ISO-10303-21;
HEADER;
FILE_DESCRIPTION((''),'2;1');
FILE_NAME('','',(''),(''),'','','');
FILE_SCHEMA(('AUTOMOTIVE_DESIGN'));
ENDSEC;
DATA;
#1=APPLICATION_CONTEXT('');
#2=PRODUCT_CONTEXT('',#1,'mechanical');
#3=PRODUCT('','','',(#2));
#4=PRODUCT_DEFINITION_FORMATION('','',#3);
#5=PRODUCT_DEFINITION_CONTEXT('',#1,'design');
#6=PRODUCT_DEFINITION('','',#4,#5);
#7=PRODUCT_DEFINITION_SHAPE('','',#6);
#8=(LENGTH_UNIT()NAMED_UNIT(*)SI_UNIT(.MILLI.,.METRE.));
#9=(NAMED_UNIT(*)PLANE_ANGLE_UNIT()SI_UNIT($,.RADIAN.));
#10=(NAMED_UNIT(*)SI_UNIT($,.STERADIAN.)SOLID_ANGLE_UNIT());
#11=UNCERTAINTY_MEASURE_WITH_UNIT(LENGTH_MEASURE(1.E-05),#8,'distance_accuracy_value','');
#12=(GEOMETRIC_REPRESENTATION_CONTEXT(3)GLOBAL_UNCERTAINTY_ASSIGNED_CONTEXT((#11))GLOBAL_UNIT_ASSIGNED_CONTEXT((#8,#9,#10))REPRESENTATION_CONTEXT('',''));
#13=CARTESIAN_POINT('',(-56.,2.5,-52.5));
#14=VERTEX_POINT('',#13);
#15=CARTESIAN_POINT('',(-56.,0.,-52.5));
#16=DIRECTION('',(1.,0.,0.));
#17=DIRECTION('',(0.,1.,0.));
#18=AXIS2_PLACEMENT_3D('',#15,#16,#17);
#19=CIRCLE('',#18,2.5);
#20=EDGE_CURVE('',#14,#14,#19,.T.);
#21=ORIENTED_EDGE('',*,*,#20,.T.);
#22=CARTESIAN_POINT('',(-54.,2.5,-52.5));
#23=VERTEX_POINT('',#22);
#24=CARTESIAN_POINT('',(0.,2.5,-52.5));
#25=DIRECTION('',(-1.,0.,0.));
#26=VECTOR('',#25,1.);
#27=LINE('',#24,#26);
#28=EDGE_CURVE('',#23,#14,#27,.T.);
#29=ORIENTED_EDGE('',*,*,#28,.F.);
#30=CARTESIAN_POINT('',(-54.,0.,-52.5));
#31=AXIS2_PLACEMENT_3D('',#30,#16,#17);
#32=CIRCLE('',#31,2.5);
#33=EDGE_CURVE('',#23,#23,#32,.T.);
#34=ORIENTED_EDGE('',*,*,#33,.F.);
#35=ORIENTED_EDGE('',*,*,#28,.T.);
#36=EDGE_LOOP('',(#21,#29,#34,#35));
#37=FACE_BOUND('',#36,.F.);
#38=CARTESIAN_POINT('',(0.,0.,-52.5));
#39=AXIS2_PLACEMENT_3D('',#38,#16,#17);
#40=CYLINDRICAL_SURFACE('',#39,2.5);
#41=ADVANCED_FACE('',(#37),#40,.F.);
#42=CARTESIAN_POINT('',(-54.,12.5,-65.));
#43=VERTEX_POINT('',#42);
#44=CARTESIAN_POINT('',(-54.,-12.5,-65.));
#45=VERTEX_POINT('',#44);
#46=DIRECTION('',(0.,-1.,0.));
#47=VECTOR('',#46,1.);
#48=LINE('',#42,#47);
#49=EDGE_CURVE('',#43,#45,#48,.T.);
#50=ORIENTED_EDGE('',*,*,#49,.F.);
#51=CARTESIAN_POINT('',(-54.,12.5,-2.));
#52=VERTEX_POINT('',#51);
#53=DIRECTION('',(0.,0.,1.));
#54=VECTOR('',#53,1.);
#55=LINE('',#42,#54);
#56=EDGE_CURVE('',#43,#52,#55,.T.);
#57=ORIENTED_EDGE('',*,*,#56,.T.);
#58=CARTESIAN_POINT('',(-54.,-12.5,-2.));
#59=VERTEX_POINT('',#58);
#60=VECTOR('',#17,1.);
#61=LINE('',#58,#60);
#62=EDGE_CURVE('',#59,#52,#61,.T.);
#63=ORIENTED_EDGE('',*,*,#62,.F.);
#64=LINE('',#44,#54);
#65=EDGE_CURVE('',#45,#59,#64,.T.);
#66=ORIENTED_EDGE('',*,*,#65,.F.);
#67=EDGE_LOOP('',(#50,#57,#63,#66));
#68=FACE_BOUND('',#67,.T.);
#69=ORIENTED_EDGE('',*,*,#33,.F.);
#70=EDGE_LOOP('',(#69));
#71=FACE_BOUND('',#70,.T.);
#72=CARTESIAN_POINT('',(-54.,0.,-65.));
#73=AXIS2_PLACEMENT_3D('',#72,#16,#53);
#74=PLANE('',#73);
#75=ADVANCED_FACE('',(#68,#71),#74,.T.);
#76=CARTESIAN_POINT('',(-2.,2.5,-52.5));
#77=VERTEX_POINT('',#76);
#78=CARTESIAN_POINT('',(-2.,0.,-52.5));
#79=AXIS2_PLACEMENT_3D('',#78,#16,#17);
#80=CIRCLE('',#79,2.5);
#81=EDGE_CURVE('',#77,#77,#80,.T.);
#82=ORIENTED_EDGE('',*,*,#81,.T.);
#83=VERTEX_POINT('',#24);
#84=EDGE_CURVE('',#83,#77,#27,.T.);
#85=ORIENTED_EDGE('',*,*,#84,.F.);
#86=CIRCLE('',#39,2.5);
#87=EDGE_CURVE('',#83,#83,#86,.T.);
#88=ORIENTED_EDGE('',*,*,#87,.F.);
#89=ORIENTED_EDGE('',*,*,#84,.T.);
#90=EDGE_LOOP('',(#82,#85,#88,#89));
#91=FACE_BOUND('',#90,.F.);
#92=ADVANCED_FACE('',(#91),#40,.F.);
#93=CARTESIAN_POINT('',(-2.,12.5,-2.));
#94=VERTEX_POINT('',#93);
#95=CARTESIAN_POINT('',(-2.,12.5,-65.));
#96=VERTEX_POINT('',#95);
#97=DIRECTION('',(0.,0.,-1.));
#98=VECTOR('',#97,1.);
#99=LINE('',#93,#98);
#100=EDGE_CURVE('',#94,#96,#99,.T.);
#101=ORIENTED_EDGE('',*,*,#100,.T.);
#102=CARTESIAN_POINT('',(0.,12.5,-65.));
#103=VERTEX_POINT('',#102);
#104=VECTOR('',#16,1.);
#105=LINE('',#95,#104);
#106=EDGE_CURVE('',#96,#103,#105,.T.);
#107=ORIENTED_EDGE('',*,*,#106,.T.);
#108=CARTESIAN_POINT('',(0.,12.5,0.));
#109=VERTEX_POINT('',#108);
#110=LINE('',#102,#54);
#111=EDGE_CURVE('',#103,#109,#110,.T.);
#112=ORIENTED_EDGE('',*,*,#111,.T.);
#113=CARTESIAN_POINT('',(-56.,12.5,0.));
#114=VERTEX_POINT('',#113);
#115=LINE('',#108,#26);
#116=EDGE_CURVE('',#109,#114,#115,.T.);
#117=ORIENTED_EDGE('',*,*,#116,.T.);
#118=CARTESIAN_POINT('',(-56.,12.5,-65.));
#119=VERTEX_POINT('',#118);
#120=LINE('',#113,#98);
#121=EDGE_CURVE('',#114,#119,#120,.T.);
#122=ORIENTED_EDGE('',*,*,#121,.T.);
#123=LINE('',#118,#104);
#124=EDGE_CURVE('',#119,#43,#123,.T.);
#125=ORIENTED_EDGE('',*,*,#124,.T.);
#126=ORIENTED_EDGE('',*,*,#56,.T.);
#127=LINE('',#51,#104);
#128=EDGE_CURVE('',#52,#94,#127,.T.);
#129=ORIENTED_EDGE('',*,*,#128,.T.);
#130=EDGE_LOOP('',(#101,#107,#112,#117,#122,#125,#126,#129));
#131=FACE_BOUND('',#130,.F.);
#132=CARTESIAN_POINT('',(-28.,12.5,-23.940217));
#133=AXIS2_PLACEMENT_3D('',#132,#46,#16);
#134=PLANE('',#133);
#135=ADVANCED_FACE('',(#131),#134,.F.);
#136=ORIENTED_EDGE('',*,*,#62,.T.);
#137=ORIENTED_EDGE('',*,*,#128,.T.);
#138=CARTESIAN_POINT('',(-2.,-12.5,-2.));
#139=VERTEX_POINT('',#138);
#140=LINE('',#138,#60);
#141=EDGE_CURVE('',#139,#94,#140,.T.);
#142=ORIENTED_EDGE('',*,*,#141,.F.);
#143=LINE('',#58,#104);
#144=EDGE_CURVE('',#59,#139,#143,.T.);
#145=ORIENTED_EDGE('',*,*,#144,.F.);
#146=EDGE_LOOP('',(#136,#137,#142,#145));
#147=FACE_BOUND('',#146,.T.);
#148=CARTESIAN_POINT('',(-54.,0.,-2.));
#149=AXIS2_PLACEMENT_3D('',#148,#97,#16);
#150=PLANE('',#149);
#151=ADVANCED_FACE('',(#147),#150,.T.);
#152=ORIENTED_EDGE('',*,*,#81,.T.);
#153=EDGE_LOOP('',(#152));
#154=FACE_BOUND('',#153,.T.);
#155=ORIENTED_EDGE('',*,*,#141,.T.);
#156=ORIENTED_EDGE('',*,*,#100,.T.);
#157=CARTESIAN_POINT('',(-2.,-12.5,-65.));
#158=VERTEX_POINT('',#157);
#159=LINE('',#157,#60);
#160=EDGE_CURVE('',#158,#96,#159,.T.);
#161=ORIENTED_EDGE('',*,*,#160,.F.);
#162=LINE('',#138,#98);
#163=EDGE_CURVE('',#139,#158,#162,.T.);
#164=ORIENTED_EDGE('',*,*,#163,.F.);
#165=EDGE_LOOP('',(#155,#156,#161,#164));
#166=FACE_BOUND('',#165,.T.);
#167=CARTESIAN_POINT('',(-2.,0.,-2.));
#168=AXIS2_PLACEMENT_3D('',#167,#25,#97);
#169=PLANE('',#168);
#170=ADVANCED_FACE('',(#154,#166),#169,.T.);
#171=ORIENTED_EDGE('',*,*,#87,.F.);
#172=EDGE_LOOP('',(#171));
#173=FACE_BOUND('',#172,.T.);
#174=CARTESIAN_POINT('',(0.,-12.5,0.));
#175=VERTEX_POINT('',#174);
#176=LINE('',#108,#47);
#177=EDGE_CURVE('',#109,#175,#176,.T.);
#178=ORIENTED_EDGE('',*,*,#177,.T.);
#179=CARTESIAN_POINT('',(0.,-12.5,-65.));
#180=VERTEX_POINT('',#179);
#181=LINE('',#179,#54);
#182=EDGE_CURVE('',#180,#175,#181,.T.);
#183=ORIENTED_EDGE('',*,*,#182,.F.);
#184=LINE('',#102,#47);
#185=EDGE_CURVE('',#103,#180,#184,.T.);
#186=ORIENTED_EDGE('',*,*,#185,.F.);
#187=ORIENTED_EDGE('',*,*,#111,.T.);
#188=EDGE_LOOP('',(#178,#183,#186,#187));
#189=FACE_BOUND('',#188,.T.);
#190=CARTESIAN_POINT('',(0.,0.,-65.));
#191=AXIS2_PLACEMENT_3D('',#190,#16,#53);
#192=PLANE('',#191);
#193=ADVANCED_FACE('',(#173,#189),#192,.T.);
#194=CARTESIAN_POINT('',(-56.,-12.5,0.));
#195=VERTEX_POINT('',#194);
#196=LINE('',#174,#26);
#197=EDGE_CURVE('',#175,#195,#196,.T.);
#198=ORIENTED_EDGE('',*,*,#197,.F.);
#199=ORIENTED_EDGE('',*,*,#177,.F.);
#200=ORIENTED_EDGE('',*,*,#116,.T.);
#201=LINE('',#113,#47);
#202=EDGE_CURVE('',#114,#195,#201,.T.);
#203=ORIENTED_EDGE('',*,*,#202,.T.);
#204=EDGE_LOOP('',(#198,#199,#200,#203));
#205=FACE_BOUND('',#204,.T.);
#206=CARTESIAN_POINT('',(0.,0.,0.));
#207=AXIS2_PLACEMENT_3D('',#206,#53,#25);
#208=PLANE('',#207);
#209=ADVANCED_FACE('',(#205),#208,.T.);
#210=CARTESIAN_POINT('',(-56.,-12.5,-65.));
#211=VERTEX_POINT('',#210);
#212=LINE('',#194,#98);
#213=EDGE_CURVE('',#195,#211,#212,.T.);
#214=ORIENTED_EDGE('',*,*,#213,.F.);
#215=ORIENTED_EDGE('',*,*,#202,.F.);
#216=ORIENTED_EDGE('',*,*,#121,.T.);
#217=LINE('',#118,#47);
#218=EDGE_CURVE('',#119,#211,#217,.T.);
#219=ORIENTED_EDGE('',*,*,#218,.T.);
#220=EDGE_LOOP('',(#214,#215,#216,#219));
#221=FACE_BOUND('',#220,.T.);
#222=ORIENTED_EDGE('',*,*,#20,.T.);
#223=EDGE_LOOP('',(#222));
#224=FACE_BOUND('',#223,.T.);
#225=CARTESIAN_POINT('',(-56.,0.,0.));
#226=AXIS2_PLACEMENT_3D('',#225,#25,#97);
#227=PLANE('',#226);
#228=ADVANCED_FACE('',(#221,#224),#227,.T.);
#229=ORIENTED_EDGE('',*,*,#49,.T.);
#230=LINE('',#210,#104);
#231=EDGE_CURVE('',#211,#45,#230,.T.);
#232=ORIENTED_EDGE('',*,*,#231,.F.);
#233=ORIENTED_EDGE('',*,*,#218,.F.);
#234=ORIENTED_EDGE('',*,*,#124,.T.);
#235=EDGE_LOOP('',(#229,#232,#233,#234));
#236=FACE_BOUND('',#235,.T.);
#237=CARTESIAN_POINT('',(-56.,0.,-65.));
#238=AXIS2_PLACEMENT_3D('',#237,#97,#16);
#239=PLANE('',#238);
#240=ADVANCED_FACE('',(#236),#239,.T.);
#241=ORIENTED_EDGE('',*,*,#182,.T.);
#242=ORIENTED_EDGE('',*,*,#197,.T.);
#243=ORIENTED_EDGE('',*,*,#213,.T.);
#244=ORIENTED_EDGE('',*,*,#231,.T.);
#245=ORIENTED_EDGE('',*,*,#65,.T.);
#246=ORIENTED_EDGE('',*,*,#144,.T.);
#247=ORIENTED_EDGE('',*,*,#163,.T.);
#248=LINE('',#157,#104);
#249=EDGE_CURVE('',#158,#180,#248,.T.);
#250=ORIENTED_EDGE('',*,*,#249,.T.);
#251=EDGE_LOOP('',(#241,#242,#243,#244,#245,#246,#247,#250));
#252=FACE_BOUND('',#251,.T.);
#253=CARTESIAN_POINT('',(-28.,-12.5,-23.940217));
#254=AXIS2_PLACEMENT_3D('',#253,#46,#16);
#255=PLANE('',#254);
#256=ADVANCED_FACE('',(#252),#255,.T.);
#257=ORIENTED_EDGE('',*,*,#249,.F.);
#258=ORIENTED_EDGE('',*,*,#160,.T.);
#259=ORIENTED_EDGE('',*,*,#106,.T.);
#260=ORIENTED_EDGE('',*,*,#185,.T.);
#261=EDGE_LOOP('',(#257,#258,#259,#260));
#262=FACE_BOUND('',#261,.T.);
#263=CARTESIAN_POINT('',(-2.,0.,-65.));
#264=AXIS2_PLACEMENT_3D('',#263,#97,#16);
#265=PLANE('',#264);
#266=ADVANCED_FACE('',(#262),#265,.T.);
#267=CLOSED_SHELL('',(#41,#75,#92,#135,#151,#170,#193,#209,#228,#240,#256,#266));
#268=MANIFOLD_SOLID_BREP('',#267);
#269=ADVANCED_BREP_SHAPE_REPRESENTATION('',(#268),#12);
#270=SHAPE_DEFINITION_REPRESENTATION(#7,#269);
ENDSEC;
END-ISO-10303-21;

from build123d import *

# Parameters (mm, degrees)
F1_DEPTH      = 12.5
F2_R          = 2.5
F3_DEPTH      = 56.001
F3_DEPTH_BACK = 126


# Not quite as in the source:
# - an extrude ends at something that could not be found from the text; its depth is read off the source's solid


with BuildPart() as f1:
    # F0 (on Front) → F1 (new body, symmetric)
    with BuildSketch(Plane.XZ):
        Polygon((-2, -65), (0, -65), (0, 0), (-56, 0), (-56, -65), (-54, -65), (-54, -2), (-2, -2), align=None)
    extrude(amount=F1_DEPTH, both=True)

    # F2 (on Right) → F3 (cut, two sides)
    with BuildSketch(Plane.YZ) as f3_sk:
        with Locations((0, -52.5)):
            Circle(F2_R)
    extrude(amount=-F3_DEPTH, mode=Mode.SUBTRACT)
    extrude(f3_sk.sketch, amount=F3_DEPTH_BACK, mode=Mode.SUBTRACT)


solid = f1.part
